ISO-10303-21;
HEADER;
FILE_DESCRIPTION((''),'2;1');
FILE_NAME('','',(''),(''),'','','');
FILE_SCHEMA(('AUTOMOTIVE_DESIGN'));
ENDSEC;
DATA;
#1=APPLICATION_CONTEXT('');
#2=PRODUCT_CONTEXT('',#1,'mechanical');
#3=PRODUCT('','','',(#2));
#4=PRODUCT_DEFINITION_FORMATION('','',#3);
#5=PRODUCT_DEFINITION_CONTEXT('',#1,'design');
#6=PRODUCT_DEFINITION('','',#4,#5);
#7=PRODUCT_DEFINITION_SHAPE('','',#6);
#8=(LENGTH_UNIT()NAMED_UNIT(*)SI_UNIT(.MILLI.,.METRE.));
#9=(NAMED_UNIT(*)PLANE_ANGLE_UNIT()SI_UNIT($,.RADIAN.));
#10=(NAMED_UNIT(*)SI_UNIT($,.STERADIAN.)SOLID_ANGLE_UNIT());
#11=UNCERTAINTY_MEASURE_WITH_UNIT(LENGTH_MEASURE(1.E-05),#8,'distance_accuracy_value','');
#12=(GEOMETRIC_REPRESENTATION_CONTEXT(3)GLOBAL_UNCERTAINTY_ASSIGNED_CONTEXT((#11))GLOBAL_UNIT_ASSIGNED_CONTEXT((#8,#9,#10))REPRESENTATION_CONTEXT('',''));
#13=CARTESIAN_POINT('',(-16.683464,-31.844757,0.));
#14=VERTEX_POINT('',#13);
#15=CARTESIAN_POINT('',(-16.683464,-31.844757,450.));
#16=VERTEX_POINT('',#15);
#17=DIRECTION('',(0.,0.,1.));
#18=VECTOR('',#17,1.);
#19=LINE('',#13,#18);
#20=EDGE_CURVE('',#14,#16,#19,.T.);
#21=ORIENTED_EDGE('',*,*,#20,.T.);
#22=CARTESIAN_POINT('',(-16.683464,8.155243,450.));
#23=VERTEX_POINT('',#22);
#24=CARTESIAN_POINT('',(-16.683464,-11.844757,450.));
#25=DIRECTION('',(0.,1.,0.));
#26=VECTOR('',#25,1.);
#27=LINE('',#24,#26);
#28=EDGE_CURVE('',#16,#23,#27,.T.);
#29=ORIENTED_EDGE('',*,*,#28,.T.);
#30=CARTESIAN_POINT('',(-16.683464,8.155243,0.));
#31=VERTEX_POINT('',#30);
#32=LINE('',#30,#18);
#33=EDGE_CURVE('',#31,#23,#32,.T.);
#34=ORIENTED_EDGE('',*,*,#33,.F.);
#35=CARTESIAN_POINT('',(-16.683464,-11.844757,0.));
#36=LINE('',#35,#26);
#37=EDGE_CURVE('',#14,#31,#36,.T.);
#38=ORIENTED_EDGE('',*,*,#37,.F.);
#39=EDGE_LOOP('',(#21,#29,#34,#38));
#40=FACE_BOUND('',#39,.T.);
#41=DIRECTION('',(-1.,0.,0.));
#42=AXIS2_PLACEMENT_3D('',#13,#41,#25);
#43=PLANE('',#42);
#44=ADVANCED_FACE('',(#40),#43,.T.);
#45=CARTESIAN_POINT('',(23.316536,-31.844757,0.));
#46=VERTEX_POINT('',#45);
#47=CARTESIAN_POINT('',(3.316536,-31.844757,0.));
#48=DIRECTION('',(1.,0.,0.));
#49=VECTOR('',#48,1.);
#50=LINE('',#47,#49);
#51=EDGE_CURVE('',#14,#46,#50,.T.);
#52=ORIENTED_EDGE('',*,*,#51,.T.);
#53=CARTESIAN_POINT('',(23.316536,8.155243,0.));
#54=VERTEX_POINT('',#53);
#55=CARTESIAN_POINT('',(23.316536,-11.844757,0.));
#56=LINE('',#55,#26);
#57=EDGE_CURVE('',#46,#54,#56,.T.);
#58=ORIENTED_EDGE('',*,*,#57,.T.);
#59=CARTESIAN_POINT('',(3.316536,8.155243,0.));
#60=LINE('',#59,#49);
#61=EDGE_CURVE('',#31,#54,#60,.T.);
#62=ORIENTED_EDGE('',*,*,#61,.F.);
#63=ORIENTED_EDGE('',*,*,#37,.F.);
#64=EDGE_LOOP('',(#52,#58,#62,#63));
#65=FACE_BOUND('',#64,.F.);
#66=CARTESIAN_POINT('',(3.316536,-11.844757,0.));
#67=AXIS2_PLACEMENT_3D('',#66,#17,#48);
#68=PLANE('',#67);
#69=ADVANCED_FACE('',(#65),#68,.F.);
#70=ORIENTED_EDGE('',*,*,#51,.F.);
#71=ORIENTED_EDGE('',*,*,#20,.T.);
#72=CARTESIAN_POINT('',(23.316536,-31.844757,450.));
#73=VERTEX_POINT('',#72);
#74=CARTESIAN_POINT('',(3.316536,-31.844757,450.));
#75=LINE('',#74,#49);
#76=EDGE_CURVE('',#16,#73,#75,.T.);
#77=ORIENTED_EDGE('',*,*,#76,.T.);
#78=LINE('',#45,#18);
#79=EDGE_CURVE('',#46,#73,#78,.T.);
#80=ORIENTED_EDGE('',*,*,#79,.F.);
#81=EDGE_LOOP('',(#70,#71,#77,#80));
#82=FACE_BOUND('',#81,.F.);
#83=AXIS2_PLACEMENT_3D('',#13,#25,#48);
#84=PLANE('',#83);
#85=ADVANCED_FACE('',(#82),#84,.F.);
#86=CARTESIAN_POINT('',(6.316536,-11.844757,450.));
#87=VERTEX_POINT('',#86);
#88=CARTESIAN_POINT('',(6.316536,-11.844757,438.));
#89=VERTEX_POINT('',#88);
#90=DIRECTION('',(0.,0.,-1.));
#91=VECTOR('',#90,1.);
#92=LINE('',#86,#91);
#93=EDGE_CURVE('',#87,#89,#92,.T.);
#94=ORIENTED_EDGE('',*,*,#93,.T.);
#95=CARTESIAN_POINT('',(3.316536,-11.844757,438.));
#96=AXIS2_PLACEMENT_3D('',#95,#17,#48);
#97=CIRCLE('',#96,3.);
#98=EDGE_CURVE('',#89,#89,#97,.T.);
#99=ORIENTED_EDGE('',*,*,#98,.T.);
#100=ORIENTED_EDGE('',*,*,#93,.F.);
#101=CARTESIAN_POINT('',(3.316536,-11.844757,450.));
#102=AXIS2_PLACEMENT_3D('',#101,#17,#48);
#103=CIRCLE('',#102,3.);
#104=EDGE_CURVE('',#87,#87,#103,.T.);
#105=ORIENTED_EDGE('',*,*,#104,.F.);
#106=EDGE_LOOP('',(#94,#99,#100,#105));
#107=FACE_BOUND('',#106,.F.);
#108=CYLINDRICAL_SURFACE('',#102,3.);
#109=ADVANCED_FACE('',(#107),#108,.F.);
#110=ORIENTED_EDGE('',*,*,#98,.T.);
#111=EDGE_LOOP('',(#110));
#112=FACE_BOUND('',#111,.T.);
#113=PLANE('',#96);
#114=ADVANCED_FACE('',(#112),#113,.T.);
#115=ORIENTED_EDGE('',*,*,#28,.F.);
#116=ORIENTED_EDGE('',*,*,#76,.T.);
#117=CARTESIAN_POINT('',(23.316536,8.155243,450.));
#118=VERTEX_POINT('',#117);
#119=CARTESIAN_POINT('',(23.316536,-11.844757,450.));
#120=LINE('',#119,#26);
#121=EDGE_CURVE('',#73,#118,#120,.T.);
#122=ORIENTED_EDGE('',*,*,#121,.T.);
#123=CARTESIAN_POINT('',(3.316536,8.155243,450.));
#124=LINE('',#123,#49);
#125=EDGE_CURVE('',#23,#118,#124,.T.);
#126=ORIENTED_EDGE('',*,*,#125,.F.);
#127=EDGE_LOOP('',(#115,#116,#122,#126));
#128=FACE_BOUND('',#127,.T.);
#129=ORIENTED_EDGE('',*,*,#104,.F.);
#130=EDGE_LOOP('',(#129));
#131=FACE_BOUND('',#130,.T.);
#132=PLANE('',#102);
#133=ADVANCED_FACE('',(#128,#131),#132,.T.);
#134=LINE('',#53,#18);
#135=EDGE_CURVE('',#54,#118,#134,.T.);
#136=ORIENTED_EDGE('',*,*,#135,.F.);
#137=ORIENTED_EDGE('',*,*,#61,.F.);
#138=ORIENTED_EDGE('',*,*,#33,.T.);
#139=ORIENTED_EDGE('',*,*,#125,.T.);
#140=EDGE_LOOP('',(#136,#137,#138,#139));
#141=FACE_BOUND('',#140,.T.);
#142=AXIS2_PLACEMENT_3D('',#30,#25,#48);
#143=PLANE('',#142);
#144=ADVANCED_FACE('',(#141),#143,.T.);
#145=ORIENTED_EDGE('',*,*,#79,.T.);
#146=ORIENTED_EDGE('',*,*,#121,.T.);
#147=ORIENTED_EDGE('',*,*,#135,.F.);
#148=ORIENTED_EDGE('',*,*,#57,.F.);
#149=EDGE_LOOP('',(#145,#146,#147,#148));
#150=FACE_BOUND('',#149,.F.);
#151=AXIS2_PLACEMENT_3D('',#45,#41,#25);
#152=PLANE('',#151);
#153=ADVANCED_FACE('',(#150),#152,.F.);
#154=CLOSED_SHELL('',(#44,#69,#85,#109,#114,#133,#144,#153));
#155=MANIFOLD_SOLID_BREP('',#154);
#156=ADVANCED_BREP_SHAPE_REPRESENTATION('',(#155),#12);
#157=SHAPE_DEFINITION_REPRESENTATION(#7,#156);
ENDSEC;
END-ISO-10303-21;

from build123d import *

# Parameters (mm, degrees)
F0_W     = 40
F0_H     = 40
F1_DEPTH = 450
F2_R     = 5
F3_DEPTH = 10
F4_DEPTH = 10
F5_R     = 3
F6_DEPTH = 12


# Not quite as in the source:
# - a feature of the source that left no trace in its solid (it failed there, or was rolled back) is left out


with BuildPart() as f1:
    # F0 (on Top) → F1 (new body)
    with BuildSketch(Plane.XY):
        with Locations((3.3165360987, -11.8447574973)):
            Rectangle(F0_W, F0_H)
    extrude(amount=F1_DEPTH)

    # F2 (on face) → F3 (join)
    with BuildSketch(Plane.XY.offset(450)):
        with Locations((3.3165360987, -11.8447574973)):
            Circle(F2_R)
    extrude(amount=F3_DEPTH)

    # F4 (cut): a face of the model
    f4_faces = [f1.faces().sort_by_distance(p)[0] for p in [
        (3.3165360987, -11.8447574973, 460),
    ]]
    extrude(f4_faces, amount=-F4_DEPTH, mode=Mode.SUBTRACT)

    # F5 (on face) → F6 (cut)
    with BuildSketch(Plane.XY.offset(450)):
        with Locations((3.3165360987, -11.8447574973)):
            Circle(F5_R)
    extrude(amount=-F6_DEPTH, mode=Mode.SUBTRACT)


solid = f1.part
